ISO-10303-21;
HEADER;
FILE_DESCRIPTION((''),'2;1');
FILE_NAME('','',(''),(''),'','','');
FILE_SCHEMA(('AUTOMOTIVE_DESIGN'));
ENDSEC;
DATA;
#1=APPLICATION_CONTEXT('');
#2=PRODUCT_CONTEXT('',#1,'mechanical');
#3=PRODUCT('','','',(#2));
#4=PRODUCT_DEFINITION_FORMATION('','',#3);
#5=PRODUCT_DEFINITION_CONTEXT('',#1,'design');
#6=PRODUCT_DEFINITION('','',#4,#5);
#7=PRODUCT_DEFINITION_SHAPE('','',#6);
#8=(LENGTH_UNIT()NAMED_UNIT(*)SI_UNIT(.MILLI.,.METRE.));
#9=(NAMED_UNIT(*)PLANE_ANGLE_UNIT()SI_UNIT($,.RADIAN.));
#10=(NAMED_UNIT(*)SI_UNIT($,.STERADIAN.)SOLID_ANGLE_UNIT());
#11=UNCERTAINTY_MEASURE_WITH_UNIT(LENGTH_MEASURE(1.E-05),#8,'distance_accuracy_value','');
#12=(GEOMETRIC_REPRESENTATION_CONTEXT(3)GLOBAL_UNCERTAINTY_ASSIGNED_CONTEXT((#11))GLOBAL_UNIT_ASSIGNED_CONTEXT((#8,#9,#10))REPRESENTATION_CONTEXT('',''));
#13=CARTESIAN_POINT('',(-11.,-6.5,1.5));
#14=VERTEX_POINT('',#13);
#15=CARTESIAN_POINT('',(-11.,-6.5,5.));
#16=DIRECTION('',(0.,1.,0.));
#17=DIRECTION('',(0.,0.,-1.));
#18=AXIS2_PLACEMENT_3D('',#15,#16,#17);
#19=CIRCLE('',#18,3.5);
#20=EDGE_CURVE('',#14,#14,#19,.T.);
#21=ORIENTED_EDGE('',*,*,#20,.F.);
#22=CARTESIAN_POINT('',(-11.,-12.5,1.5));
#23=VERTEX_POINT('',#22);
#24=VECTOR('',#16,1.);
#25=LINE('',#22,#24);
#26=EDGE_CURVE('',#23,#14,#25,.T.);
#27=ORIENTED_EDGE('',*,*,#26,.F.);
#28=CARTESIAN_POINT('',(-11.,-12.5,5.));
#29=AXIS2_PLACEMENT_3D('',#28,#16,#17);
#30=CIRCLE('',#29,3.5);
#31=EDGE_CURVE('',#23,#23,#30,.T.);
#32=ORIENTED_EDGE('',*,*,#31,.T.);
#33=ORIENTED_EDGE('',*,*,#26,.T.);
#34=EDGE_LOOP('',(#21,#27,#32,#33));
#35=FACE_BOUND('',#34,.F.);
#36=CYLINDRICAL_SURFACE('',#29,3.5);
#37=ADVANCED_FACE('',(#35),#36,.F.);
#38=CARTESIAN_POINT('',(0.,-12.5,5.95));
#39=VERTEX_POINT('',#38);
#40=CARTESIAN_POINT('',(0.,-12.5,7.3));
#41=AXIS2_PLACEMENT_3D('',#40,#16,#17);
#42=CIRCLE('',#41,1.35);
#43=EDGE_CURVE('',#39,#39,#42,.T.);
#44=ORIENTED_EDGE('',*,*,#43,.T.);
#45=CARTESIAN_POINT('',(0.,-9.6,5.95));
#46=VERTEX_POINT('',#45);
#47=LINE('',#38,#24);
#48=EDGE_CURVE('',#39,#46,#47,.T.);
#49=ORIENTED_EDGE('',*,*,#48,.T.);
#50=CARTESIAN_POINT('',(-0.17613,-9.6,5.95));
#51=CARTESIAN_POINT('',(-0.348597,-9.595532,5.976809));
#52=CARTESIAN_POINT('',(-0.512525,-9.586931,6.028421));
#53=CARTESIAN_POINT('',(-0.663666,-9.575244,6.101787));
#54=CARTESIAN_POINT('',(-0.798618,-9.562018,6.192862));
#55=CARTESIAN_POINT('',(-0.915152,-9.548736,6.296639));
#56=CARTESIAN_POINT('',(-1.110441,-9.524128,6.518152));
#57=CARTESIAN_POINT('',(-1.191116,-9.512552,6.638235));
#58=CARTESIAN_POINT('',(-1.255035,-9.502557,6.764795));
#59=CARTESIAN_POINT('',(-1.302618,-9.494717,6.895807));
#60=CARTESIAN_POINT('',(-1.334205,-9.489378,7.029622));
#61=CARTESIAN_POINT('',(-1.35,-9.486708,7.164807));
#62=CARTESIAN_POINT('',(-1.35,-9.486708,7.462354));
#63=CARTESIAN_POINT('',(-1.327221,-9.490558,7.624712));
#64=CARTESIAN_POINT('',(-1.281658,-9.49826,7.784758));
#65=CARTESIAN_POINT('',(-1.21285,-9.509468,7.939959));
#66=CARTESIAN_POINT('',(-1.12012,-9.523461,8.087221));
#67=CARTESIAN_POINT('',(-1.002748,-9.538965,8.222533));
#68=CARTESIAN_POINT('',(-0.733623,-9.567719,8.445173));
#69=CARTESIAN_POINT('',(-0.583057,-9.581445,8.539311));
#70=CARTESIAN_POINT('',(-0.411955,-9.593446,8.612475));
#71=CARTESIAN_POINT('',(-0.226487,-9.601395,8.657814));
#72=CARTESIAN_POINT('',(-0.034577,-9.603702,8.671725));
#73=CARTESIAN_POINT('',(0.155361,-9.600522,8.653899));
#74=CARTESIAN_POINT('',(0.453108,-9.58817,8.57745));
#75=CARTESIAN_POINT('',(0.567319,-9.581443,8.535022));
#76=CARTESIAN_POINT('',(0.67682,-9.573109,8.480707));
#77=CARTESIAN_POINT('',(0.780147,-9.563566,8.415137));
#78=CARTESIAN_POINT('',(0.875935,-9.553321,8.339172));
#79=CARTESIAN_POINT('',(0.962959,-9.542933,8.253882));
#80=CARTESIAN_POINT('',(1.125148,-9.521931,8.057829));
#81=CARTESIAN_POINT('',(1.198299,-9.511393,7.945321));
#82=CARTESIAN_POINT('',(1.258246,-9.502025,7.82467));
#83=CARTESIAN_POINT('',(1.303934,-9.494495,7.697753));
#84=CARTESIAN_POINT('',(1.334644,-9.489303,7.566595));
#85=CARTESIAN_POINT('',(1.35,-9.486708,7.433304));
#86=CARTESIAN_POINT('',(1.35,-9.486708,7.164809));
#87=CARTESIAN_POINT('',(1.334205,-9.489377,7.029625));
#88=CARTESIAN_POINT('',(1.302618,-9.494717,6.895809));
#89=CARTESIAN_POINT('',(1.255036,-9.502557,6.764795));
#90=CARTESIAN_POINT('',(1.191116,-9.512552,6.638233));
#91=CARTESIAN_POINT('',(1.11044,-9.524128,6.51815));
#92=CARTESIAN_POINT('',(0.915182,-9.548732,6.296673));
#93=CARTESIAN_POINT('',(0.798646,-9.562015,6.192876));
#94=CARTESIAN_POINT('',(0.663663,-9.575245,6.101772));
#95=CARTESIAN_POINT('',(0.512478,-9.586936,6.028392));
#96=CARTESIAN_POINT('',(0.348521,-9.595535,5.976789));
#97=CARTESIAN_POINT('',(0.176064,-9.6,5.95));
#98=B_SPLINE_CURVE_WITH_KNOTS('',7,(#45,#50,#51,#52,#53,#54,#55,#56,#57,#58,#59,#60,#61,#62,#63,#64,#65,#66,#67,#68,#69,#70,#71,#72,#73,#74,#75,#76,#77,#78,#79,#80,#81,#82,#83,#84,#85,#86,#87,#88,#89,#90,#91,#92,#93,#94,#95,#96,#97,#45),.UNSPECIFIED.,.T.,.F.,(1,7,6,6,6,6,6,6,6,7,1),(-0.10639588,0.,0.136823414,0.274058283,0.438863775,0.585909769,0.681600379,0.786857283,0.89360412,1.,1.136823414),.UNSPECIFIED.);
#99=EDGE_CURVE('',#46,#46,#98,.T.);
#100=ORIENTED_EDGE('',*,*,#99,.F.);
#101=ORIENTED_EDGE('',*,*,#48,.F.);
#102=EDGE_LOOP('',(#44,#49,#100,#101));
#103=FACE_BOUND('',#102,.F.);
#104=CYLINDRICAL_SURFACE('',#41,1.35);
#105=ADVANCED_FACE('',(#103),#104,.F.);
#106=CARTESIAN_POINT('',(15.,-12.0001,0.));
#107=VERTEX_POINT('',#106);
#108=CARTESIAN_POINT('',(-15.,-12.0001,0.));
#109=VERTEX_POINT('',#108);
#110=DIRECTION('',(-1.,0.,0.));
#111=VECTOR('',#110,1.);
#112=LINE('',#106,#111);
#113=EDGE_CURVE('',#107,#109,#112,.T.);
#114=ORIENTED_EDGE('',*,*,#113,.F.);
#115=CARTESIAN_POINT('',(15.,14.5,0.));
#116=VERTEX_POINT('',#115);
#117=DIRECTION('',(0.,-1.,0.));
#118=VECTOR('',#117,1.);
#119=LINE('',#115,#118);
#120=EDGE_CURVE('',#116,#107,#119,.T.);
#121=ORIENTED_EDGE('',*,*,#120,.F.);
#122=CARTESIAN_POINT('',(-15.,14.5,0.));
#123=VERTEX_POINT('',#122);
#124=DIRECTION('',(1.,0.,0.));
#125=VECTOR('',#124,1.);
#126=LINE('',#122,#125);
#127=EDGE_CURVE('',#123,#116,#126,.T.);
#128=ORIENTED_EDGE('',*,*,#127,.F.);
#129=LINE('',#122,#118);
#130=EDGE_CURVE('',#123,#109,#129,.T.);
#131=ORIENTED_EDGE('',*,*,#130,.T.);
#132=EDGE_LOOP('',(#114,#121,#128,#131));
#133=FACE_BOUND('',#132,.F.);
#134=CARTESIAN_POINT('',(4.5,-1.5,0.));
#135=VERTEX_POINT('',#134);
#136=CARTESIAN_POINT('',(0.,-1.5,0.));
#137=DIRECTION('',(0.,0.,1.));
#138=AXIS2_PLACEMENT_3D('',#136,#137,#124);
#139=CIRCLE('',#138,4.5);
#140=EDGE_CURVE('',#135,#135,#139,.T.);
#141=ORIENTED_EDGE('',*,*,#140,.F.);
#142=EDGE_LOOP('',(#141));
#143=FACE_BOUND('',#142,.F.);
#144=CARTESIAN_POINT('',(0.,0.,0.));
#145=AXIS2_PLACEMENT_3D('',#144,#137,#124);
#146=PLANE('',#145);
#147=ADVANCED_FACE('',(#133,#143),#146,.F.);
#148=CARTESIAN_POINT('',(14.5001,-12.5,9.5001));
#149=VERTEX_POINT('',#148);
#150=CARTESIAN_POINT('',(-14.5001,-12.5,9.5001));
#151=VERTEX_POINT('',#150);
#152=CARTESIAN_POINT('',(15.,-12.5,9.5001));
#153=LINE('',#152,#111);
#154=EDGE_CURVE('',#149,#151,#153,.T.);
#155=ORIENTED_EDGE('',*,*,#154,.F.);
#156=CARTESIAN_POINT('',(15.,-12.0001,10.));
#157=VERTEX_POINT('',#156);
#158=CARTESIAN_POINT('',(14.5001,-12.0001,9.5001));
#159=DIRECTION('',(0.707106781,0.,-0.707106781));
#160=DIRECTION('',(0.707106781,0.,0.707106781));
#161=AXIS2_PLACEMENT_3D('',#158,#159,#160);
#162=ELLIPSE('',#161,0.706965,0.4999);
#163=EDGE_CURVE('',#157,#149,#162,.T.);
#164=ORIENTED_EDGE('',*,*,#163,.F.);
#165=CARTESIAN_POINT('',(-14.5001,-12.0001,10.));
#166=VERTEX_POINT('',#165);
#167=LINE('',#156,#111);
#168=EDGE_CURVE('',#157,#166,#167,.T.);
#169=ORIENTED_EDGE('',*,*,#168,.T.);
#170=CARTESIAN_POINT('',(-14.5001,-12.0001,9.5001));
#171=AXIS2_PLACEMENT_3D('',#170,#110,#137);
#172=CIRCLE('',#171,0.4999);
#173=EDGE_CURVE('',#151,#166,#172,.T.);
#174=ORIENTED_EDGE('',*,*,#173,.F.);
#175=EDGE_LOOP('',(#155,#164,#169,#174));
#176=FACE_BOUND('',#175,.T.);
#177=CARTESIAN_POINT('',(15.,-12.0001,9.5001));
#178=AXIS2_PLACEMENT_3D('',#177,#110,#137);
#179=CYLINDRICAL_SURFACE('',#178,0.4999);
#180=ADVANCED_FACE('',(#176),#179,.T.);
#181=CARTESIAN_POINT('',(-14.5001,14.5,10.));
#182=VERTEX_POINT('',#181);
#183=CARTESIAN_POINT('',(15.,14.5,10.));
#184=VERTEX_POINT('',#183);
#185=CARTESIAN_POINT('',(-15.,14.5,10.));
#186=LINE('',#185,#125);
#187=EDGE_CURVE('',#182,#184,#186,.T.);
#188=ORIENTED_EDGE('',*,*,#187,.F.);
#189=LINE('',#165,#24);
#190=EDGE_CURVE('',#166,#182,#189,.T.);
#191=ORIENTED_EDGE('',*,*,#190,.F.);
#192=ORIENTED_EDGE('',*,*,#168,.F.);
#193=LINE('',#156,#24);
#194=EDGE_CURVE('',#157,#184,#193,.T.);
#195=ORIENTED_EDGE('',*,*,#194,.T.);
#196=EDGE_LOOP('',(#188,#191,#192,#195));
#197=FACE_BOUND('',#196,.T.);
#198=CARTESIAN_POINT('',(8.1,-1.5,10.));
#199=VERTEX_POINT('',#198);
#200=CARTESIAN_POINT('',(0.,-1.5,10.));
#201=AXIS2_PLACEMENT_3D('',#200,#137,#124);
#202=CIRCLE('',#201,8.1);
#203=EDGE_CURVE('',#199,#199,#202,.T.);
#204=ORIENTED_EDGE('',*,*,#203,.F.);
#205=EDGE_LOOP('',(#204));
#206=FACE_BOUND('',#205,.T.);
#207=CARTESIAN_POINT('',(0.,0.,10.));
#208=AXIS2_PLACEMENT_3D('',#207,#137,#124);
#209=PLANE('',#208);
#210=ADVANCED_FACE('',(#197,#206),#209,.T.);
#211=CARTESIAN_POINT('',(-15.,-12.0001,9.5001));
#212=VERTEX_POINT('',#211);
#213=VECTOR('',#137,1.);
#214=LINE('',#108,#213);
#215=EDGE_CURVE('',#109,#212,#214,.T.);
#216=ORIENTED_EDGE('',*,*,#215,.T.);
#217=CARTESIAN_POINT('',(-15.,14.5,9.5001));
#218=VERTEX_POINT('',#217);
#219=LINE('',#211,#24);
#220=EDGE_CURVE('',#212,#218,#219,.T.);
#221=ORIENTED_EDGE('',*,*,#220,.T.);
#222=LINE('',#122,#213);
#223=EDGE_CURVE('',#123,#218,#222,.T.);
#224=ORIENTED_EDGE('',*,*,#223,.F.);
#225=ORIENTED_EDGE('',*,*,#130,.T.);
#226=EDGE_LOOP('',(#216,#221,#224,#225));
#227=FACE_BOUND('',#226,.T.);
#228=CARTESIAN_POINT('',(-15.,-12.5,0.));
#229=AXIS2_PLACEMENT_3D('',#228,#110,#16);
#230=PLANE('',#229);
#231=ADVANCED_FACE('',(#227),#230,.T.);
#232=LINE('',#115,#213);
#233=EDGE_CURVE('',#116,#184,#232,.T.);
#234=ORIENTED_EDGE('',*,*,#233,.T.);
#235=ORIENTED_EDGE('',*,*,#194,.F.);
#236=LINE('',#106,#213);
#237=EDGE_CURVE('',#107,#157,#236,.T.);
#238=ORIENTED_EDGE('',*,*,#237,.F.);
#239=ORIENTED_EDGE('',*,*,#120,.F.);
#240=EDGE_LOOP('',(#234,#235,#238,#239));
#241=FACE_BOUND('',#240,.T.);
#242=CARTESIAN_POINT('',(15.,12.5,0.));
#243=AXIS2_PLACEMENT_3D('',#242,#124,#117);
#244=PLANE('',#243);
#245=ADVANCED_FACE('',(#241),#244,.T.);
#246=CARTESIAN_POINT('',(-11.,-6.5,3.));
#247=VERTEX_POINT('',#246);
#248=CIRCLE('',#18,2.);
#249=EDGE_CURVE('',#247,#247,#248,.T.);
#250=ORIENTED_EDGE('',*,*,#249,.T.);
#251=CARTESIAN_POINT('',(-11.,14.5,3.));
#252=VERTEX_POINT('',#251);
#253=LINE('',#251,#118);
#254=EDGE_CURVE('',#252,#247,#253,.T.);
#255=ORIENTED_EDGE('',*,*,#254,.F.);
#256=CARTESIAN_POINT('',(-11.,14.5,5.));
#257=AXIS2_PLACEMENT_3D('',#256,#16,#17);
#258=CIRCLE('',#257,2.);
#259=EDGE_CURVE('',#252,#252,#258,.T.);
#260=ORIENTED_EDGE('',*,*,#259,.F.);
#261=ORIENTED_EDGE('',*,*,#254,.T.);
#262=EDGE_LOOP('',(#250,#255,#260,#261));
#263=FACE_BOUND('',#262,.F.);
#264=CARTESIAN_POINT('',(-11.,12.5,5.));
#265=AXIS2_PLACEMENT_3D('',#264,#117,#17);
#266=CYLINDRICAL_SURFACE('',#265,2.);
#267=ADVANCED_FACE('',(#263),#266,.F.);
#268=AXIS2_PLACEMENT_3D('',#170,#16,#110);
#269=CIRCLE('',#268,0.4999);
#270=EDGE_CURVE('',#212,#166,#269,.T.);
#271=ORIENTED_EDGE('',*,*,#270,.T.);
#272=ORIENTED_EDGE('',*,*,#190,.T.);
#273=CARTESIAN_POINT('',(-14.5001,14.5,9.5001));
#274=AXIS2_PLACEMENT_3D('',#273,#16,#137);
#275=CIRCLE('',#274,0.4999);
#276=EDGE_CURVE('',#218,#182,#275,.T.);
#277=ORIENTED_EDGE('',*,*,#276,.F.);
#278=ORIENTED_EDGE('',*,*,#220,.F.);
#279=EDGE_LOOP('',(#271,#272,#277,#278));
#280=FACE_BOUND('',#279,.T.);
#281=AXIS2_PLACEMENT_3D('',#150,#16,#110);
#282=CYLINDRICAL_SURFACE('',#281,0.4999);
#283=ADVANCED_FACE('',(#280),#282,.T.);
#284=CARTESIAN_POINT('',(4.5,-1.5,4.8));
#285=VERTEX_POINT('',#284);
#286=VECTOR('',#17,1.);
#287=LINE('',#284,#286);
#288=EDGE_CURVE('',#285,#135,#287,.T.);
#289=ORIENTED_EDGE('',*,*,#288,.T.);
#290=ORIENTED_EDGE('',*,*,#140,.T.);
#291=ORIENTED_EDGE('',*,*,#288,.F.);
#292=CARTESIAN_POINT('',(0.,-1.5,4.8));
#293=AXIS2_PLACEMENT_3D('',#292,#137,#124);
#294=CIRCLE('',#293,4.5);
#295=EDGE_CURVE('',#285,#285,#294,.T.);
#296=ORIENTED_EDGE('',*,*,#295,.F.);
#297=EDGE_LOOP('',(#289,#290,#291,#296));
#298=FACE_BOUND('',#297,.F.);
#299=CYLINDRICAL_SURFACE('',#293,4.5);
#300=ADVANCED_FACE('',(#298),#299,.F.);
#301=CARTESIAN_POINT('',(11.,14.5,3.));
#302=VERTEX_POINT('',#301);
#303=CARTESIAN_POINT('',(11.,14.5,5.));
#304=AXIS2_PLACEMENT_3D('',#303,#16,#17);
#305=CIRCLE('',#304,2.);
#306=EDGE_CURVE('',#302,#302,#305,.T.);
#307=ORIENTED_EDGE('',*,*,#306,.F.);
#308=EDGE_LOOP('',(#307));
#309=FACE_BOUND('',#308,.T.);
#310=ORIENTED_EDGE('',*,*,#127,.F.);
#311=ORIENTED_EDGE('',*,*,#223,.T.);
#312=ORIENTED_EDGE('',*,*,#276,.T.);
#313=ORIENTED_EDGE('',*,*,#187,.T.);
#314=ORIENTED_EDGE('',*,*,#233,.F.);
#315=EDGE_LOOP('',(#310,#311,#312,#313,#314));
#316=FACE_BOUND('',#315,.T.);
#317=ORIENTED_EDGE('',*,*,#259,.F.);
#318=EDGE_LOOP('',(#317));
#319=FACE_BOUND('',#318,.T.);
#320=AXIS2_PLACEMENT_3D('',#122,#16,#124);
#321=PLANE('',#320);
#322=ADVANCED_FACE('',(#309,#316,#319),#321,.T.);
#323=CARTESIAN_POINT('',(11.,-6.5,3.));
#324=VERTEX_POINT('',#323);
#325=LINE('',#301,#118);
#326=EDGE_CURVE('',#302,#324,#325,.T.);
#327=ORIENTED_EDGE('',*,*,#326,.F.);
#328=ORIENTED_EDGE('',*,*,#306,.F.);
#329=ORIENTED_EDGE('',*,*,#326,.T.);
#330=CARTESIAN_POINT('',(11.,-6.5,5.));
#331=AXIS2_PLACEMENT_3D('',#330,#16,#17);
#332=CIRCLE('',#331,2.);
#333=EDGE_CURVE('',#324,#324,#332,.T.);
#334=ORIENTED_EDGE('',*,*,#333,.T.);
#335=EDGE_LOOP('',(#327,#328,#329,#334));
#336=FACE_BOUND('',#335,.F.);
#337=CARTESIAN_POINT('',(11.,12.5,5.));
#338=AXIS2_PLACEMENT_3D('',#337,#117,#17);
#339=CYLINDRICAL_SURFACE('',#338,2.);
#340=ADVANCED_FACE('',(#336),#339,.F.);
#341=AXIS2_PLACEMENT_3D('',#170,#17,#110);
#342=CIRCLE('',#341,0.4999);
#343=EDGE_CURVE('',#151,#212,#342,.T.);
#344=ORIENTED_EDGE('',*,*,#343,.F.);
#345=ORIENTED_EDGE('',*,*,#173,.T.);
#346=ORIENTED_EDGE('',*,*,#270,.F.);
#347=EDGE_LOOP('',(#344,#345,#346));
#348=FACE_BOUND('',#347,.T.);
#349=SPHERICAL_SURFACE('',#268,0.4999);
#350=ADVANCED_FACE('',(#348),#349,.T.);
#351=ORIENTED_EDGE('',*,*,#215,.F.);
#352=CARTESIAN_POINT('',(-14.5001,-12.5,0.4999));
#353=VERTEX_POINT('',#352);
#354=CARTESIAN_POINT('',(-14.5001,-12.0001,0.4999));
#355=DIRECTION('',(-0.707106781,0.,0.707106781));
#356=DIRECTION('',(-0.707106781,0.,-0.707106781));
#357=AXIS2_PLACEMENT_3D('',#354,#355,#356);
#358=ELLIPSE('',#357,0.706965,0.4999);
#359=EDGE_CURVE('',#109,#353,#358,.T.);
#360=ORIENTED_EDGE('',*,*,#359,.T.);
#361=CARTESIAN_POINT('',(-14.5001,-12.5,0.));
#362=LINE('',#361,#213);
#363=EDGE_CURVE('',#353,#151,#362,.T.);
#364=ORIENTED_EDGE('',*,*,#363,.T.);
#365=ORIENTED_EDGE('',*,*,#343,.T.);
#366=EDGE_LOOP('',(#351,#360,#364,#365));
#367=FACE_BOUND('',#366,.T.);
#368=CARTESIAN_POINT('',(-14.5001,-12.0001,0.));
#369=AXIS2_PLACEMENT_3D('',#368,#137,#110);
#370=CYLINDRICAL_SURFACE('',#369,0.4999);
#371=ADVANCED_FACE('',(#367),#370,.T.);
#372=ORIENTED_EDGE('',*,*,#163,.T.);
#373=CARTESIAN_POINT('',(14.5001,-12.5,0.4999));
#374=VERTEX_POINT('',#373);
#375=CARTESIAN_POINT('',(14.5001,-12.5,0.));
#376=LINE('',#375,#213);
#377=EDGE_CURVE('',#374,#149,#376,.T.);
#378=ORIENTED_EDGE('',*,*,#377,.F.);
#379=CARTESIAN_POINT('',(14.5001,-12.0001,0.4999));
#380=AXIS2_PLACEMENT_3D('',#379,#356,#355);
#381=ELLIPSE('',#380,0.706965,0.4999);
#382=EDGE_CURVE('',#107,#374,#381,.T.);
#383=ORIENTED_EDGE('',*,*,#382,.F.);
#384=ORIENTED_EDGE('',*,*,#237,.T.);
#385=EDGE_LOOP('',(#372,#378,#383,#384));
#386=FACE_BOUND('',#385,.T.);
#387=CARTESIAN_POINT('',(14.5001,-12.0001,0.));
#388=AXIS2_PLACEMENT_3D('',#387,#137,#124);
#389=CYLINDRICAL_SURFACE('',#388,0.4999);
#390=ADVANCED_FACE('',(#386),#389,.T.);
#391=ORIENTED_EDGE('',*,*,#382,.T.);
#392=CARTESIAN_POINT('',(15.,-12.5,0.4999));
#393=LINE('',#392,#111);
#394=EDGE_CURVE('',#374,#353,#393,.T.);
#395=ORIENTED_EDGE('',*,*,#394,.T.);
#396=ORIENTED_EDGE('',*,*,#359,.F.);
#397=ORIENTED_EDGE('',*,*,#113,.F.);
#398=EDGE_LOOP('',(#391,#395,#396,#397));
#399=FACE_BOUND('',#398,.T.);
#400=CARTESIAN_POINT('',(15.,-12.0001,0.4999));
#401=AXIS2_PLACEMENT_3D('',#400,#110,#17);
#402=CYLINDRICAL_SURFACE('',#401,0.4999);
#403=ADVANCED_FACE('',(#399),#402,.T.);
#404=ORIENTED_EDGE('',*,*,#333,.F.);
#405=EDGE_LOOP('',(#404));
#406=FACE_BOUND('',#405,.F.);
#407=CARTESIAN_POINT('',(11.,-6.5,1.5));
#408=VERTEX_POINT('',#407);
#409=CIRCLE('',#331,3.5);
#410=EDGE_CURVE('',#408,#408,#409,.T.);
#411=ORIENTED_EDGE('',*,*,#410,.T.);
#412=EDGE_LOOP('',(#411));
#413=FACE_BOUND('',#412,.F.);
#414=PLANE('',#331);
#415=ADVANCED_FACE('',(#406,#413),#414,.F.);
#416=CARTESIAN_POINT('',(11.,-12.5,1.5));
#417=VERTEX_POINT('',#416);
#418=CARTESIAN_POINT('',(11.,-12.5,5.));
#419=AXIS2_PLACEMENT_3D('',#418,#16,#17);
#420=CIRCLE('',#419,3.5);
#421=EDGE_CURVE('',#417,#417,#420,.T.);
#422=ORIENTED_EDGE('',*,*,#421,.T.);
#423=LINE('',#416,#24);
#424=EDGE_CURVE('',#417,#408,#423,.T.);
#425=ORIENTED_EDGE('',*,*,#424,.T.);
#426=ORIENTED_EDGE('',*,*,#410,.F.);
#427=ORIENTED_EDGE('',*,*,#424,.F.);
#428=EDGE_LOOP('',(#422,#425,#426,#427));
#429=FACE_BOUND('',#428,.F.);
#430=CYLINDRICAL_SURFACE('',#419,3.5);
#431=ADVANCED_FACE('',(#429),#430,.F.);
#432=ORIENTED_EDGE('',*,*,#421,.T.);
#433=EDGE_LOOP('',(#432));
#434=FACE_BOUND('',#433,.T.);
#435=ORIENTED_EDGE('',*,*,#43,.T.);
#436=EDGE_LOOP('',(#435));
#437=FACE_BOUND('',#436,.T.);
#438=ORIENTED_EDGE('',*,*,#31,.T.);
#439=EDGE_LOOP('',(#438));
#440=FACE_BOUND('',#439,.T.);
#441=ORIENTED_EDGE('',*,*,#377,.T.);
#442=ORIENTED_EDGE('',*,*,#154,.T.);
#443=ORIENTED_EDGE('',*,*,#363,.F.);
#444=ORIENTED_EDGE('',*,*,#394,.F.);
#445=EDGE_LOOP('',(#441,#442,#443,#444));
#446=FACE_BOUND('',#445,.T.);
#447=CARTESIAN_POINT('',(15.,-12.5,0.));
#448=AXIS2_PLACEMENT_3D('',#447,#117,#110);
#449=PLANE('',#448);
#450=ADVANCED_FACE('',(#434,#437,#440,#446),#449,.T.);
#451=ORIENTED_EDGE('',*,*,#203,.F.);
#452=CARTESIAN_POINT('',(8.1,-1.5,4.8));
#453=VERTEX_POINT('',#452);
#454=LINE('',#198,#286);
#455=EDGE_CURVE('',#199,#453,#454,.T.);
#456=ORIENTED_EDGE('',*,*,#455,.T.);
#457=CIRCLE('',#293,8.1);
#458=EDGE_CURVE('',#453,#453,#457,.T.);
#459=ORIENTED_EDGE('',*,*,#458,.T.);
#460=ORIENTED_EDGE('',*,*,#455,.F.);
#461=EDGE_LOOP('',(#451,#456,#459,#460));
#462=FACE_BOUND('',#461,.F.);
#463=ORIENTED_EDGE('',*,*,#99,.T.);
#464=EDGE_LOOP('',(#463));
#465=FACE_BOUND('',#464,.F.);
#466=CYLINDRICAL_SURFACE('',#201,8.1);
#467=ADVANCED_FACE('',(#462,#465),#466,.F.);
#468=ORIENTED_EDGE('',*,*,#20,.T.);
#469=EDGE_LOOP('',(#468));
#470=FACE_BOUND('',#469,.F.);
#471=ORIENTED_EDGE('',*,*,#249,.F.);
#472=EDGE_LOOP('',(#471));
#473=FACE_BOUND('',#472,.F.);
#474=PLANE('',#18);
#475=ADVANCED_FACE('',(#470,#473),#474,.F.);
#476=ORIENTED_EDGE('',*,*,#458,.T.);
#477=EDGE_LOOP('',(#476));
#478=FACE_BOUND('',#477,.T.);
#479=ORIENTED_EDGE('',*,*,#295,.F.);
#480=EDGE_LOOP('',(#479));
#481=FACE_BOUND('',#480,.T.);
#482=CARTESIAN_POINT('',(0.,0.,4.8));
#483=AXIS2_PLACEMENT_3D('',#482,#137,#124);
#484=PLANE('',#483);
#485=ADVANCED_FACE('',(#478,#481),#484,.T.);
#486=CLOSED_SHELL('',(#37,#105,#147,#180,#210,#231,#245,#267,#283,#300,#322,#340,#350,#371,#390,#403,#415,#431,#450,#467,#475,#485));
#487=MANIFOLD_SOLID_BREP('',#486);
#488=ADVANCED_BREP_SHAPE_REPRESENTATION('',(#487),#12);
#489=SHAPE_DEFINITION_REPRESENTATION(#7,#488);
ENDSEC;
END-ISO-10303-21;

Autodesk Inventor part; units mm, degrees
ref_plane "YZ Plane" through (0, 0, 0) normal (1, 0, 0) x (0, 1, 0)
ref_plane "XZ Plane" through (0, 0, 0) normal (0, 1, 0) x (-1, 0, 0)
ref_plane "XY Plane" through (0, 0, 0) normal (0, 0, 1) x (1, 0, 0)
sketch "Sketch1" plane through (0, 0, 0) normal (0, 0, 1) x (1, 0, 0)
  line L0 (-15, 12.5) -> (15, 12.5)
  line L1 (15, 12.5) -> (15, -12.5)
  line L2 (15, -12.5) -> (-15, -12.5)
  line L3 (-15, -12.5) -> (-15, 12.5)
  line L4 (-15, 12.5) -> (15, -12.5) construction
  line L5 (15, 12.5) -> (-15, -12.5) construction
  point P0 (0, 0)
  dimension "d13" = 4
  dimension "d0" = 30
  dimension "d10" = 25
extrude "Extrusion1" add sketch "Sketch1" along normal blind 10
sketch "Sketch2" plane through (0, 0, 10) normal (0, 0, 1) x (1, 0, 0)
  circle A0 centre (0, -1.5) radius 8.1
  line L0 (15, 12.5) -> (-15, 12.5) projected
  point P0 (0, 12.5)
  dimension "d4" = 16.2
  dimension "d38" = 14
extrude "Extrusion2" cut sketch "Sketch2" against normal blind 5.2
sketch "Sketch3" plane through (0, -1.5, 4.8) normal (0, 0, 1) x (1, 0, 0)
  circle A0 centre (0, 0) radius 4.5
  circle A1 centre (0, 0) radius 8.1 projected
  dimension "d7" = 9
extrude "Extrusion3" cut sketch "Sketch3" against normal blind 5.2 contours A0
sketch "Sketch4" plane through (-15, -12.5, 0) normal (0, -1, 0) x (1, 0, 0)
  line L0 (0, 0) -> (0, 10) projected
  line L1 (0, 10) -> (30, 10) projected
  point P0 (15, 0)
  point P1 (4, 5)
  dimension "d11" = 4
  dimension "d12" = 5
hole "Hole1" at (-11, -12.5, 5) direction (0, 1, 0) diameter 4 end through all counterbore diameter 7 counterbore depth 6
sketch "Sketch5" plane through (-15, -12.5, 0) normal (0, -1, 0) x (1, 0, 0)
  line L0 (30, 0) -> (30, 10) projected
  line L1 (0, 10) -> (30, 10) projected
  point P0 (15, 0)
  point P1 (26, 5)
  dimension "d20" = 4
  dimension "d21" = 5
hole "Hole2" at (11, -12.5, 5) direction (0, 1, 0) diameter 4 end through all counterbore diameter 7 counterbore depth 6
sketch "Sketch6" plane through (-15, -12.5, 0) normal (0, -1, 0) x (1, 0, 0)
  line L0 (0, 10) -> (30, 10) projected
  line L1 (30, 0) -> (30, 10) projected
  point P0 (15, 0)
  point P1 (15, 7.3)
  dimension "d29" = 2.7
  dimension "d30" = 15
hole "Hole3" at (0, -12.5, 7.3) direction (0, 1, 0) diameter 2.7 depth 8 tip angle 118
fillet "Fillet2" radius 0.5 5 edges at (-15, 0, 10) (0, -12.5, 0) (15, -12.5, 5) (-15, -12.5, 5) (0, -12.5, 10)
move faces "Move1" translate (0, 2, 0) faces at (3.3569, 12.5, 1.0764)
properties part number "wheel_holder_2"
